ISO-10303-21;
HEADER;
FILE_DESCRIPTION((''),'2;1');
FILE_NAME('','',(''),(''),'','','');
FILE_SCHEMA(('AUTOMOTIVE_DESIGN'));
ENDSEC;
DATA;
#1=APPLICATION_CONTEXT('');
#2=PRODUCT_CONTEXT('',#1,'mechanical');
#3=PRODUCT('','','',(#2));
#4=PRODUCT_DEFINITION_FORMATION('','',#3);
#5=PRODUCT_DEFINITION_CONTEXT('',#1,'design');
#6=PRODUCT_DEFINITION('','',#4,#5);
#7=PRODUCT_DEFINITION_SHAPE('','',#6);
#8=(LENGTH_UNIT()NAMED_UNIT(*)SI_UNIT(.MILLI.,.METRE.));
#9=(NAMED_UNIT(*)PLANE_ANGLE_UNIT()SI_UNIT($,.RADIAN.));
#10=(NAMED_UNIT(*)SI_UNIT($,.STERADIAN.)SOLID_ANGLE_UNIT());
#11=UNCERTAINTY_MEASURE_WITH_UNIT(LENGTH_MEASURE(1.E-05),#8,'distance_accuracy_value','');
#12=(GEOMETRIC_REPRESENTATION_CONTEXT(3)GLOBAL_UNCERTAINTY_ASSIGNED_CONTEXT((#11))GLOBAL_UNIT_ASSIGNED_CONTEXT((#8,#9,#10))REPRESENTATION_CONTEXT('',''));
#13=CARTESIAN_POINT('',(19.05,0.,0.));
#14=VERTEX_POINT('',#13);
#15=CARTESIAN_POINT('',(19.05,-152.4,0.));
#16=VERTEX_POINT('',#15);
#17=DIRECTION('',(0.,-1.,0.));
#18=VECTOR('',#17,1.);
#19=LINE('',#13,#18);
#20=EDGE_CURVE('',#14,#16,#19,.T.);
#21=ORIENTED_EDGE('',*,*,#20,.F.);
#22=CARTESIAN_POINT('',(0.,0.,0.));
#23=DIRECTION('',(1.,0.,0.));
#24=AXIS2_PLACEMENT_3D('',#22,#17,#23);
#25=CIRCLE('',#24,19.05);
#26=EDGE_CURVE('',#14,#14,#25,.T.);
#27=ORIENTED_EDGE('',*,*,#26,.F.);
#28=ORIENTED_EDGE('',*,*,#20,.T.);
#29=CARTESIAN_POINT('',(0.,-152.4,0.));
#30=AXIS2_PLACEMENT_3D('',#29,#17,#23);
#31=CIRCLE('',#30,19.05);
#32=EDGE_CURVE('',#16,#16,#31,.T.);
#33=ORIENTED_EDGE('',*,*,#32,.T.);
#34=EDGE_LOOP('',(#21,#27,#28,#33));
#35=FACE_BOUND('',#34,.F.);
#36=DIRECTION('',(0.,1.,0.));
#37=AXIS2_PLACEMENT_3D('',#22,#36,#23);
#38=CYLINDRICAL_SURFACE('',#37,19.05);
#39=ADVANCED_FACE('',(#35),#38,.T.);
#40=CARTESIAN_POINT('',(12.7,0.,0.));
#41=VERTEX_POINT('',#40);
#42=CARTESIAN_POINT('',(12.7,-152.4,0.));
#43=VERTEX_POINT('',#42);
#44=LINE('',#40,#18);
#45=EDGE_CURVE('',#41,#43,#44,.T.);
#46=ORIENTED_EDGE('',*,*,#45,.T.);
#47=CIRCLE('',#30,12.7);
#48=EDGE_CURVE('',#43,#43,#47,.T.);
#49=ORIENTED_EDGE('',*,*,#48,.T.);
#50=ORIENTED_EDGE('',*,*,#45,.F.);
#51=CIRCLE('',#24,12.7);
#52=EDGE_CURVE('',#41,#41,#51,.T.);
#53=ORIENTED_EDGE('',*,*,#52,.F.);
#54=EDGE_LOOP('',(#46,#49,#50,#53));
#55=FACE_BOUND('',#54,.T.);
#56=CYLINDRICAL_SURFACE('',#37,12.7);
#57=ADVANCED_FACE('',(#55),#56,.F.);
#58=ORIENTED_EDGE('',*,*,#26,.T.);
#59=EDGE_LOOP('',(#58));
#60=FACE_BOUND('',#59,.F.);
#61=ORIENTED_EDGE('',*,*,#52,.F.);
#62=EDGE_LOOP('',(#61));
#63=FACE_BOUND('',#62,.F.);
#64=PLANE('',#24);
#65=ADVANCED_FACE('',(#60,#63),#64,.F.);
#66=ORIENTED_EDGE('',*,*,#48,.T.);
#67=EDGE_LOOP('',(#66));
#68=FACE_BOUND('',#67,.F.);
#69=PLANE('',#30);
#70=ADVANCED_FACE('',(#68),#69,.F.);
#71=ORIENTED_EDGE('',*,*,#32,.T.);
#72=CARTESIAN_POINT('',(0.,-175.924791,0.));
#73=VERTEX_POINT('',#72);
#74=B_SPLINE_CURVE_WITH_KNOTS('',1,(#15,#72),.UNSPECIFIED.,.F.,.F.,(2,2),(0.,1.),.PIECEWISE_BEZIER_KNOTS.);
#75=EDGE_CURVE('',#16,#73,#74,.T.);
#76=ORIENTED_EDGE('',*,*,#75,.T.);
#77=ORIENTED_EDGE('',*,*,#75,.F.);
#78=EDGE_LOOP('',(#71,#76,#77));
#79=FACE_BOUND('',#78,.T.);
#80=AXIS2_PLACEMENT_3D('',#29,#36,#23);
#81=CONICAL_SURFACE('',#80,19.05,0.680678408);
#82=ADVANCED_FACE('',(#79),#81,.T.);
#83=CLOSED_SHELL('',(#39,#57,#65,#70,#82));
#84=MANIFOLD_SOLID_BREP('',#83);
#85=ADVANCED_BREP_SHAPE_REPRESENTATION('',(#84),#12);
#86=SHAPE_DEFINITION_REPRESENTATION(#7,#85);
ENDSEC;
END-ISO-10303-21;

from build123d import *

# Parameters (mm, degrees)
F0_R     = 19.05
F0_R_2   = 12.7
F1_DEPTH = 152.4
F2_R     = 19.05


# Not quite as in the source:
# - an extrude whose draft closes it to a point is written as a loft to that point


with BuildPart() as f1:
    # F0 (on Front) → F1 (new body)
    with BuildSketch(Plane.XZ):
        Circle(F0_R)
        Circle(F0_R_2, mode=Mode.SUBTRACT)
    extrude(amount=F1_DEPTH)

    # F2 (on face) → F3 section 0
    with BuildSketch(Plane.XZ.offset(152.4), mode=Mode.PRIVATE) as f3_s0:
        Circle(F2_R)
    loft([f3_s0.sketch, Vertex(0, -175.924790832, 0)], ruled=True)


solid = f1.part
